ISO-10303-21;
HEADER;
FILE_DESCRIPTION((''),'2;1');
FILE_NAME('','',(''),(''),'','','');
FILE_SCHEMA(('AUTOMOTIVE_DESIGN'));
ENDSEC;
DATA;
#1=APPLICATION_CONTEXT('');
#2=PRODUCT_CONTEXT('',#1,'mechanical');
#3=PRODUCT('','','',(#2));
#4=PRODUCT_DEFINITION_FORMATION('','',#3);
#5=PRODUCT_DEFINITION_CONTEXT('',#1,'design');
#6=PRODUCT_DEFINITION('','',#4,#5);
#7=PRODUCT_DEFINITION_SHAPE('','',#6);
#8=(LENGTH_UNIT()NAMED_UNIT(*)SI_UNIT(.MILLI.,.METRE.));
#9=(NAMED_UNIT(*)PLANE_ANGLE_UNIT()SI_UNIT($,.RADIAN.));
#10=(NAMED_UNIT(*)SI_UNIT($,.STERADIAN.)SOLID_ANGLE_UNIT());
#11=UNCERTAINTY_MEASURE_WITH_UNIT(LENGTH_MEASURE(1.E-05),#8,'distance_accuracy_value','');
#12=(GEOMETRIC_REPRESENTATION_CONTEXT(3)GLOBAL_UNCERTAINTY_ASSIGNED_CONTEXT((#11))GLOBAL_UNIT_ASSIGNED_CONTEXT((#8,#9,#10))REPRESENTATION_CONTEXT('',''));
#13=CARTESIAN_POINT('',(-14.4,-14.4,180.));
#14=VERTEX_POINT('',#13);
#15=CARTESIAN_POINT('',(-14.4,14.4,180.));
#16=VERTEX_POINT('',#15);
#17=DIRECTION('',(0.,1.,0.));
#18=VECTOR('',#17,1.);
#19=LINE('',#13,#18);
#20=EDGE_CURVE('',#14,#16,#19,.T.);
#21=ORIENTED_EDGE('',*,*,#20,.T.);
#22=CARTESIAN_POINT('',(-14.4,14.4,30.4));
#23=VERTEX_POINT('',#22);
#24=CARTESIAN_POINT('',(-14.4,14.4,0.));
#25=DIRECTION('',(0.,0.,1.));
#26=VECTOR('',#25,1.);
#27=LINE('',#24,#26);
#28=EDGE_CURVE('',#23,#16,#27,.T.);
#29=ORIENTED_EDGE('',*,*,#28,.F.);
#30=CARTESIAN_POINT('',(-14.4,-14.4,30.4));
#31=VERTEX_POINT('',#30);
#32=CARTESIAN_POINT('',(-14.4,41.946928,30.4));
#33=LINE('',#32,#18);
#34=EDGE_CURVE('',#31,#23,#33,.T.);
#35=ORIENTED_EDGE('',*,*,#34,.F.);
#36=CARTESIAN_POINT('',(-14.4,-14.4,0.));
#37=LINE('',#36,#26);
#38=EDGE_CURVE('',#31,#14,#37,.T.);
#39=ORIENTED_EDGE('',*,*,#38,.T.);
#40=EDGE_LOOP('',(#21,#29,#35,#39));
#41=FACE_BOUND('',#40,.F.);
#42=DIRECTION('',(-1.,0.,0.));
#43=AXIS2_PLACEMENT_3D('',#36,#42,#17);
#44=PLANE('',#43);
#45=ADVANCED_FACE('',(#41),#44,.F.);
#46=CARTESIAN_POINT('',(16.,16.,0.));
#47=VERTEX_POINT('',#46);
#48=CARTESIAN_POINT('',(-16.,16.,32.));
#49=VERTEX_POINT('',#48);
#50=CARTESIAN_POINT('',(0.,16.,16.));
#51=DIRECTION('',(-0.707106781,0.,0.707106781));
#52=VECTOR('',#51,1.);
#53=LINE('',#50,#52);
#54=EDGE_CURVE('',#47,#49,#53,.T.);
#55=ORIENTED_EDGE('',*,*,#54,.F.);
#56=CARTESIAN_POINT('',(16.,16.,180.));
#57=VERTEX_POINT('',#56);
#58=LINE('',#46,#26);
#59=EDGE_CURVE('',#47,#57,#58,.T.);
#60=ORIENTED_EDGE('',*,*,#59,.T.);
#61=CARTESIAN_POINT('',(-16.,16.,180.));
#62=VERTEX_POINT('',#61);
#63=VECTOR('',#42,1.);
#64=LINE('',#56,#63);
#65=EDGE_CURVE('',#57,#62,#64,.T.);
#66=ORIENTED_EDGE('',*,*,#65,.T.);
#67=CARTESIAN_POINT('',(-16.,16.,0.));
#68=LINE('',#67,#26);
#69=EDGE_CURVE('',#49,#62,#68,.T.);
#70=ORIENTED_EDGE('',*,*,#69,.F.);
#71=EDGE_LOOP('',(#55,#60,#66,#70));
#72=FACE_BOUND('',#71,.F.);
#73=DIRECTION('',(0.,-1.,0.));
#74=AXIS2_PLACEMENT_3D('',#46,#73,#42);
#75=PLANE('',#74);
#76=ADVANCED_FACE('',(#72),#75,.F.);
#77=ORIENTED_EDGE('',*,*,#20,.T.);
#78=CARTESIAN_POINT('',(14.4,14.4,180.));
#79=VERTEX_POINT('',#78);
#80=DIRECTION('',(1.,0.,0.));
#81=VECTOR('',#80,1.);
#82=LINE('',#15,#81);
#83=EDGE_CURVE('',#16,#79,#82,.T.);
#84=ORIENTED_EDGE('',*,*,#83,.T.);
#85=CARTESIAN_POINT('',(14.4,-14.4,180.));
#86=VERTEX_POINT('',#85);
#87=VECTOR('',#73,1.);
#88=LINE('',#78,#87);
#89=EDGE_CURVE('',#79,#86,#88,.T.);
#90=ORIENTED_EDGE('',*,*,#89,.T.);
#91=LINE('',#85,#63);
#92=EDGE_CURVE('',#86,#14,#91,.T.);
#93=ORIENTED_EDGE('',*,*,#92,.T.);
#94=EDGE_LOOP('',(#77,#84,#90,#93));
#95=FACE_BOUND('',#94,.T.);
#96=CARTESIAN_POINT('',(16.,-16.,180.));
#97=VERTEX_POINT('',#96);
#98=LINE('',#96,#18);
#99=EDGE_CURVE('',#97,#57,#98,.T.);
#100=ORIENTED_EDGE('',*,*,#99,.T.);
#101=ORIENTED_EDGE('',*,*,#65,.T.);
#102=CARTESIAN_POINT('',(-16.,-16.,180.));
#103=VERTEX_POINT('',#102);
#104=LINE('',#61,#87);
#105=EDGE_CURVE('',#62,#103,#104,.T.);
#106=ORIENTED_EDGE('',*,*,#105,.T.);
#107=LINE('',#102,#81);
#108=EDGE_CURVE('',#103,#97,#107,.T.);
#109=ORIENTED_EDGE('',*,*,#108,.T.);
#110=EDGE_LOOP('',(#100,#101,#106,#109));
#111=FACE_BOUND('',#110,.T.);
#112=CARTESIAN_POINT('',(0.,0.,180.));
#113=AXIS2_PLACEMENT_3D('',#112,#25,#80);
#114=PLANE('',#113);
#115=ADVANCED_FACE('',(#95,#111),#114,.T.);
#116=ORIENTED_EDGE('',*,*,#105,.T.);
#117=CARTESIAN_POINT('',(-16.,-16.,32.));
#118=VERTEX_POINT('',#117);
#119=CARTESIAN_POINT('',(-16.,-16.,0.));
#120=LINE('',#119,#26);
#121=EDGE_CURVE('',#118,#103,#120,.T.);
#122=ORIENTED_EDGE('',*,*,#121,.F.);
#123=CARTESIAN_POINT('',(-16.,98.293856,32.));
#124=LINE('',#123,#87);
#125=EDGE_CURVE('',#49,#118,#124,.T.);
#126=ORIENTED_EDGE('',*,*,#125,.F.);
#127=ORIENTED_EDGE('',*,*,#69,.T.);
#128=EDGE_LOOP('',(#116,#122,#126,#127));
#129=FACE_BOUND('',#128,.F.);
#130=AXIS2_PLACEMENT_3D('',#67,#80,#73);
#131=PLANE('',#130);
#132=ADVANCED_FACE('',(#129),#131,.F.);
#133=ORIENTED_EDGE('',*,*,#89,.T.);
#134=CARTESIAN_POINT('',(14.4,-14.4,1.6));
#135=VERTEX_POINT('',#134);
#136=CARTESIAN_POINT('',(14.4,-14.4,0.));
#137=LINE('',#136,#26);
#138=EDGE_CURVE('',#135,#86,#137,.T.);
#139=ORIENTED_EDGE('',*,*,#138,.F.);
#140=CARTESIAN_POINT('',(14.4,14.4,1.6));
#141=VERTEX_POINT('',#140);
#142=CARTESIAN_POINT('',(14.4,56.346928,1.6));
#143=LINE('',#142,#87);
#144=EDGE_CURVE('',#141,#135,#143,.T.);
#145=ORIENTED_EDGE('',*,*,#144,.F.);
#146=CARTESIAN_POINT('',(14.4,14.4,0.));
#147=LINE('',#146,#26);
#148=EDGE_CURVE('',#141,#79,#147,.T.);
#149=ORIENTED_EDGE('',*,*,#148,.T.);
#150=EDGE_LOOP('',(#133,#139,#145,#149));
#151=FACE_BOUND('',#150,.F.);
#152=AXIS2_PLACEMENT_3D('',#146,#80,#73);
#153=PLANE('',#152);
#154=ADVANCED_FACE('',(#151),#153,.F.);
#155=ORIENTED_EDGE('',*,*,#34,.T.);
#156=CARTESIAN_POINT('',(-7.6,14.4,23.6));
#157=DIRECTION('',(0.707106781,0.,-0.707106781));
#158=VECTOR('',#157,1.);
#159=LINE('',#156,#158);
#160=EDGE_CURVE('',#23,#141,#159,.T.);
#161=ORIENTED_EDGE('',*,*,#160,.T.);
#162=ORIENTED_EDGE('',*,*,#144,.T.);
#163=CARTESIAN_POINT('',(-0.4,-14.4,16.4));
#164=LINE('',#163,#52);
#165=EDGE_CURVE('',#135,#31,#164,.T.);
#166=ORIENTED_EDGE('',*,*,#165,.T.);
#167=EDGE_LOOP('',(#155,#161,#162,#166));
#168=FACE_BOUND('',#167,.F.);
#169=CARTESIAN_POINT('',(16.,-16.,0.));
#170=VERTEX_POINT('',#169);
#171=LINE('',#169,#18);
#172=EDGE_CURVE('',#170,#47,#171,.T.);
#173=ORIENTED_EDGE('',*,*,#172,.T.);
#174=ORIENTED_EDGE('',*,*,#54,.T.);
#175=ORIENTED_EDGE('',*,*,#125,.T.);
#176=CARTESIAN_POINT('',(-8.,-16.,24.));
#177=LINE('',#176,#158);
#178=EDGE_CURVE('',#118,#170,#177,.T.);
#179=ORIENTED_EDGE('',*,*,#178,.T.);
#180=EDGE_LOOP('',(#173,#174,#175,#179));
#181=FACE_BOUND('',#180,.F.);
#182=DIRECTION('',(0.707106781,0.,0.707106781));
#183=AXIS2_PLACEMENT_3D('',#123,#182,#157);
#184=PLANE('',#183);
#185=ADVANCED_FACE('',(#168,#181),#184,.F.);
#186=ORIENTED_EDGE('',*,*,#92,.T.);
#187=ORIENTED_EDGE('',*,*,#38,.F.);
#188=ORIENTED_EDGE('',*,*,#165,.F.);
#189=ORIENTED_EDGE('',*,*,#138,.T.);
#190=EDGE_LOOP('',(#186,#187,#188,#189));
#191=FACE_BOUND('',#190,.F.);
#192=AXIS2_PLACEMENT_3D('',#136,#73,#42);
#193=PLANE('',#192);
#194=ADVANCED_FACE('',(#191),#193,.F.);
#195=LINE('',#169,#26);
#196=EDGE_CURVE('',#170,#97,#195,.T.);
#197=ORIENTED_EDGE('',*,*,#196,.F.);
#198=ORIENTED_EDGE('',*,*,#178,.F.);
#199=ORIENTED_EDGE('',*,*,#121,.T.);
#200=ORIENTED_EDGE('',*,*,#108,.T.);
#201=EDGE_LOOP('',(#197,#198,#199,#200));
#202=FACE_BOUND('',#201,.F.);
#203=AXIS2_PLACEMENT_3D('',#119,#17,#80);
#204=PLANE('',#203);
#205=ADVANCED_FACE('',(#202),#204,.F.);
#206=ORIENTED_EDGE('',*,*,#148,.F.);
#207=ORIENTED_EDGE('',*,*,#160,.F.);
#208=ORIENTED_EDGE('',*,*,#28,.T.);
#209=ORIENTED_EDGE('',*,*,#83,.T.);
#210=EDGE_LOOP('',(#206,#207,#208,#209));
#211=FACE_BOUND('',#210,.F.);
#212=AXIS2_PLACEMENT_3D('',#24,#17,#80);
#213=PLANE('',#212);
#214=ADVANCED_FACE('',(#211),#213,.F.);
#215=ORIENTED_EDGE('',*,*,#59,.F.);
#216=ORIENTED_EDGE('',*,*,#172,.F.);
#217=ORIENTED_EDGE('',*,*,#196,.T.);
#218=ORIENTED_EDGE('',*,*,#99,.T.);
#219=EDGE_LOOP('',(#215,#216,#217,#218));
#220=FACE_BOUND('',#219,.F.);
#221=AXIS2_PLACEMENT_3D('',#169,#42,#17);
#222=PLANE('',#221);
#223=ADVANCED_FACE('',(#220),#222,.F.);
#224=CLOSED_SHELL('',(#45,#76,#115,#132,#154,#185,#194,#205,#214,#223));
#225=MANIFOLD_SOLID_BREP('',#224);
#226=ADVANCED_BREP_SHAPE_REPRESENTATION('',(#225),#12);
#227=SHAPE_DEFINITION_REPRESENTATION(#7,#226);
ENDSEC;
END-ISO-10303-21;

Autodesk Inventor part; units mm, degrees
ref_plane "YZ Plane" through (0, 0, 0) normal (1, 0, 0) x (0, 1, 0)
ref_plane "XZ Plane" through (0, 0, 0) normal (0, 1, 0) x (-1, 0, 0)
ref_plane "XY Plane" through (0, 0, 0) normal (0, 0, 1) x (1, 0, 0)
sketch "スケッチ1" plane through (0, 0, 0) normal (0, 0, 1) x (1, 0, 0)
  line L0 (-16, -16) -> (16, -16)
  line L1 (16, -16) -> (16, 16)
  line L2 (16, 16) -> (-16, 16)
  line L3 (-16, 16) -> (-16, -16)
  line L4 (-16, -16) -> (16, 16) construction
  line L5 (16, -16) -> (-16, 16) construction
  line L6 (-14.4, 14.4) -> (14.4, 14.4)
  line L7 (14.4, 14.4) -> (14.4, -14.4)
  line L8 (14.4, -14.4) -> (-14.4, -14.4)
  line L9 (-14.4, -14.4) -> (-14.4, 14.4)
  point P0 (0, 0)
  dimension "d0" = 32
  dimension "d1" = 32
  dimension "d2" = 1.6
extrude "押し出し1" add sketch "スケッチ1" along normal blind 180
chamfer "面取り1" distance 32 angle 45 1 edges at (-16, 0, 0)
properties part number "PipeB"
